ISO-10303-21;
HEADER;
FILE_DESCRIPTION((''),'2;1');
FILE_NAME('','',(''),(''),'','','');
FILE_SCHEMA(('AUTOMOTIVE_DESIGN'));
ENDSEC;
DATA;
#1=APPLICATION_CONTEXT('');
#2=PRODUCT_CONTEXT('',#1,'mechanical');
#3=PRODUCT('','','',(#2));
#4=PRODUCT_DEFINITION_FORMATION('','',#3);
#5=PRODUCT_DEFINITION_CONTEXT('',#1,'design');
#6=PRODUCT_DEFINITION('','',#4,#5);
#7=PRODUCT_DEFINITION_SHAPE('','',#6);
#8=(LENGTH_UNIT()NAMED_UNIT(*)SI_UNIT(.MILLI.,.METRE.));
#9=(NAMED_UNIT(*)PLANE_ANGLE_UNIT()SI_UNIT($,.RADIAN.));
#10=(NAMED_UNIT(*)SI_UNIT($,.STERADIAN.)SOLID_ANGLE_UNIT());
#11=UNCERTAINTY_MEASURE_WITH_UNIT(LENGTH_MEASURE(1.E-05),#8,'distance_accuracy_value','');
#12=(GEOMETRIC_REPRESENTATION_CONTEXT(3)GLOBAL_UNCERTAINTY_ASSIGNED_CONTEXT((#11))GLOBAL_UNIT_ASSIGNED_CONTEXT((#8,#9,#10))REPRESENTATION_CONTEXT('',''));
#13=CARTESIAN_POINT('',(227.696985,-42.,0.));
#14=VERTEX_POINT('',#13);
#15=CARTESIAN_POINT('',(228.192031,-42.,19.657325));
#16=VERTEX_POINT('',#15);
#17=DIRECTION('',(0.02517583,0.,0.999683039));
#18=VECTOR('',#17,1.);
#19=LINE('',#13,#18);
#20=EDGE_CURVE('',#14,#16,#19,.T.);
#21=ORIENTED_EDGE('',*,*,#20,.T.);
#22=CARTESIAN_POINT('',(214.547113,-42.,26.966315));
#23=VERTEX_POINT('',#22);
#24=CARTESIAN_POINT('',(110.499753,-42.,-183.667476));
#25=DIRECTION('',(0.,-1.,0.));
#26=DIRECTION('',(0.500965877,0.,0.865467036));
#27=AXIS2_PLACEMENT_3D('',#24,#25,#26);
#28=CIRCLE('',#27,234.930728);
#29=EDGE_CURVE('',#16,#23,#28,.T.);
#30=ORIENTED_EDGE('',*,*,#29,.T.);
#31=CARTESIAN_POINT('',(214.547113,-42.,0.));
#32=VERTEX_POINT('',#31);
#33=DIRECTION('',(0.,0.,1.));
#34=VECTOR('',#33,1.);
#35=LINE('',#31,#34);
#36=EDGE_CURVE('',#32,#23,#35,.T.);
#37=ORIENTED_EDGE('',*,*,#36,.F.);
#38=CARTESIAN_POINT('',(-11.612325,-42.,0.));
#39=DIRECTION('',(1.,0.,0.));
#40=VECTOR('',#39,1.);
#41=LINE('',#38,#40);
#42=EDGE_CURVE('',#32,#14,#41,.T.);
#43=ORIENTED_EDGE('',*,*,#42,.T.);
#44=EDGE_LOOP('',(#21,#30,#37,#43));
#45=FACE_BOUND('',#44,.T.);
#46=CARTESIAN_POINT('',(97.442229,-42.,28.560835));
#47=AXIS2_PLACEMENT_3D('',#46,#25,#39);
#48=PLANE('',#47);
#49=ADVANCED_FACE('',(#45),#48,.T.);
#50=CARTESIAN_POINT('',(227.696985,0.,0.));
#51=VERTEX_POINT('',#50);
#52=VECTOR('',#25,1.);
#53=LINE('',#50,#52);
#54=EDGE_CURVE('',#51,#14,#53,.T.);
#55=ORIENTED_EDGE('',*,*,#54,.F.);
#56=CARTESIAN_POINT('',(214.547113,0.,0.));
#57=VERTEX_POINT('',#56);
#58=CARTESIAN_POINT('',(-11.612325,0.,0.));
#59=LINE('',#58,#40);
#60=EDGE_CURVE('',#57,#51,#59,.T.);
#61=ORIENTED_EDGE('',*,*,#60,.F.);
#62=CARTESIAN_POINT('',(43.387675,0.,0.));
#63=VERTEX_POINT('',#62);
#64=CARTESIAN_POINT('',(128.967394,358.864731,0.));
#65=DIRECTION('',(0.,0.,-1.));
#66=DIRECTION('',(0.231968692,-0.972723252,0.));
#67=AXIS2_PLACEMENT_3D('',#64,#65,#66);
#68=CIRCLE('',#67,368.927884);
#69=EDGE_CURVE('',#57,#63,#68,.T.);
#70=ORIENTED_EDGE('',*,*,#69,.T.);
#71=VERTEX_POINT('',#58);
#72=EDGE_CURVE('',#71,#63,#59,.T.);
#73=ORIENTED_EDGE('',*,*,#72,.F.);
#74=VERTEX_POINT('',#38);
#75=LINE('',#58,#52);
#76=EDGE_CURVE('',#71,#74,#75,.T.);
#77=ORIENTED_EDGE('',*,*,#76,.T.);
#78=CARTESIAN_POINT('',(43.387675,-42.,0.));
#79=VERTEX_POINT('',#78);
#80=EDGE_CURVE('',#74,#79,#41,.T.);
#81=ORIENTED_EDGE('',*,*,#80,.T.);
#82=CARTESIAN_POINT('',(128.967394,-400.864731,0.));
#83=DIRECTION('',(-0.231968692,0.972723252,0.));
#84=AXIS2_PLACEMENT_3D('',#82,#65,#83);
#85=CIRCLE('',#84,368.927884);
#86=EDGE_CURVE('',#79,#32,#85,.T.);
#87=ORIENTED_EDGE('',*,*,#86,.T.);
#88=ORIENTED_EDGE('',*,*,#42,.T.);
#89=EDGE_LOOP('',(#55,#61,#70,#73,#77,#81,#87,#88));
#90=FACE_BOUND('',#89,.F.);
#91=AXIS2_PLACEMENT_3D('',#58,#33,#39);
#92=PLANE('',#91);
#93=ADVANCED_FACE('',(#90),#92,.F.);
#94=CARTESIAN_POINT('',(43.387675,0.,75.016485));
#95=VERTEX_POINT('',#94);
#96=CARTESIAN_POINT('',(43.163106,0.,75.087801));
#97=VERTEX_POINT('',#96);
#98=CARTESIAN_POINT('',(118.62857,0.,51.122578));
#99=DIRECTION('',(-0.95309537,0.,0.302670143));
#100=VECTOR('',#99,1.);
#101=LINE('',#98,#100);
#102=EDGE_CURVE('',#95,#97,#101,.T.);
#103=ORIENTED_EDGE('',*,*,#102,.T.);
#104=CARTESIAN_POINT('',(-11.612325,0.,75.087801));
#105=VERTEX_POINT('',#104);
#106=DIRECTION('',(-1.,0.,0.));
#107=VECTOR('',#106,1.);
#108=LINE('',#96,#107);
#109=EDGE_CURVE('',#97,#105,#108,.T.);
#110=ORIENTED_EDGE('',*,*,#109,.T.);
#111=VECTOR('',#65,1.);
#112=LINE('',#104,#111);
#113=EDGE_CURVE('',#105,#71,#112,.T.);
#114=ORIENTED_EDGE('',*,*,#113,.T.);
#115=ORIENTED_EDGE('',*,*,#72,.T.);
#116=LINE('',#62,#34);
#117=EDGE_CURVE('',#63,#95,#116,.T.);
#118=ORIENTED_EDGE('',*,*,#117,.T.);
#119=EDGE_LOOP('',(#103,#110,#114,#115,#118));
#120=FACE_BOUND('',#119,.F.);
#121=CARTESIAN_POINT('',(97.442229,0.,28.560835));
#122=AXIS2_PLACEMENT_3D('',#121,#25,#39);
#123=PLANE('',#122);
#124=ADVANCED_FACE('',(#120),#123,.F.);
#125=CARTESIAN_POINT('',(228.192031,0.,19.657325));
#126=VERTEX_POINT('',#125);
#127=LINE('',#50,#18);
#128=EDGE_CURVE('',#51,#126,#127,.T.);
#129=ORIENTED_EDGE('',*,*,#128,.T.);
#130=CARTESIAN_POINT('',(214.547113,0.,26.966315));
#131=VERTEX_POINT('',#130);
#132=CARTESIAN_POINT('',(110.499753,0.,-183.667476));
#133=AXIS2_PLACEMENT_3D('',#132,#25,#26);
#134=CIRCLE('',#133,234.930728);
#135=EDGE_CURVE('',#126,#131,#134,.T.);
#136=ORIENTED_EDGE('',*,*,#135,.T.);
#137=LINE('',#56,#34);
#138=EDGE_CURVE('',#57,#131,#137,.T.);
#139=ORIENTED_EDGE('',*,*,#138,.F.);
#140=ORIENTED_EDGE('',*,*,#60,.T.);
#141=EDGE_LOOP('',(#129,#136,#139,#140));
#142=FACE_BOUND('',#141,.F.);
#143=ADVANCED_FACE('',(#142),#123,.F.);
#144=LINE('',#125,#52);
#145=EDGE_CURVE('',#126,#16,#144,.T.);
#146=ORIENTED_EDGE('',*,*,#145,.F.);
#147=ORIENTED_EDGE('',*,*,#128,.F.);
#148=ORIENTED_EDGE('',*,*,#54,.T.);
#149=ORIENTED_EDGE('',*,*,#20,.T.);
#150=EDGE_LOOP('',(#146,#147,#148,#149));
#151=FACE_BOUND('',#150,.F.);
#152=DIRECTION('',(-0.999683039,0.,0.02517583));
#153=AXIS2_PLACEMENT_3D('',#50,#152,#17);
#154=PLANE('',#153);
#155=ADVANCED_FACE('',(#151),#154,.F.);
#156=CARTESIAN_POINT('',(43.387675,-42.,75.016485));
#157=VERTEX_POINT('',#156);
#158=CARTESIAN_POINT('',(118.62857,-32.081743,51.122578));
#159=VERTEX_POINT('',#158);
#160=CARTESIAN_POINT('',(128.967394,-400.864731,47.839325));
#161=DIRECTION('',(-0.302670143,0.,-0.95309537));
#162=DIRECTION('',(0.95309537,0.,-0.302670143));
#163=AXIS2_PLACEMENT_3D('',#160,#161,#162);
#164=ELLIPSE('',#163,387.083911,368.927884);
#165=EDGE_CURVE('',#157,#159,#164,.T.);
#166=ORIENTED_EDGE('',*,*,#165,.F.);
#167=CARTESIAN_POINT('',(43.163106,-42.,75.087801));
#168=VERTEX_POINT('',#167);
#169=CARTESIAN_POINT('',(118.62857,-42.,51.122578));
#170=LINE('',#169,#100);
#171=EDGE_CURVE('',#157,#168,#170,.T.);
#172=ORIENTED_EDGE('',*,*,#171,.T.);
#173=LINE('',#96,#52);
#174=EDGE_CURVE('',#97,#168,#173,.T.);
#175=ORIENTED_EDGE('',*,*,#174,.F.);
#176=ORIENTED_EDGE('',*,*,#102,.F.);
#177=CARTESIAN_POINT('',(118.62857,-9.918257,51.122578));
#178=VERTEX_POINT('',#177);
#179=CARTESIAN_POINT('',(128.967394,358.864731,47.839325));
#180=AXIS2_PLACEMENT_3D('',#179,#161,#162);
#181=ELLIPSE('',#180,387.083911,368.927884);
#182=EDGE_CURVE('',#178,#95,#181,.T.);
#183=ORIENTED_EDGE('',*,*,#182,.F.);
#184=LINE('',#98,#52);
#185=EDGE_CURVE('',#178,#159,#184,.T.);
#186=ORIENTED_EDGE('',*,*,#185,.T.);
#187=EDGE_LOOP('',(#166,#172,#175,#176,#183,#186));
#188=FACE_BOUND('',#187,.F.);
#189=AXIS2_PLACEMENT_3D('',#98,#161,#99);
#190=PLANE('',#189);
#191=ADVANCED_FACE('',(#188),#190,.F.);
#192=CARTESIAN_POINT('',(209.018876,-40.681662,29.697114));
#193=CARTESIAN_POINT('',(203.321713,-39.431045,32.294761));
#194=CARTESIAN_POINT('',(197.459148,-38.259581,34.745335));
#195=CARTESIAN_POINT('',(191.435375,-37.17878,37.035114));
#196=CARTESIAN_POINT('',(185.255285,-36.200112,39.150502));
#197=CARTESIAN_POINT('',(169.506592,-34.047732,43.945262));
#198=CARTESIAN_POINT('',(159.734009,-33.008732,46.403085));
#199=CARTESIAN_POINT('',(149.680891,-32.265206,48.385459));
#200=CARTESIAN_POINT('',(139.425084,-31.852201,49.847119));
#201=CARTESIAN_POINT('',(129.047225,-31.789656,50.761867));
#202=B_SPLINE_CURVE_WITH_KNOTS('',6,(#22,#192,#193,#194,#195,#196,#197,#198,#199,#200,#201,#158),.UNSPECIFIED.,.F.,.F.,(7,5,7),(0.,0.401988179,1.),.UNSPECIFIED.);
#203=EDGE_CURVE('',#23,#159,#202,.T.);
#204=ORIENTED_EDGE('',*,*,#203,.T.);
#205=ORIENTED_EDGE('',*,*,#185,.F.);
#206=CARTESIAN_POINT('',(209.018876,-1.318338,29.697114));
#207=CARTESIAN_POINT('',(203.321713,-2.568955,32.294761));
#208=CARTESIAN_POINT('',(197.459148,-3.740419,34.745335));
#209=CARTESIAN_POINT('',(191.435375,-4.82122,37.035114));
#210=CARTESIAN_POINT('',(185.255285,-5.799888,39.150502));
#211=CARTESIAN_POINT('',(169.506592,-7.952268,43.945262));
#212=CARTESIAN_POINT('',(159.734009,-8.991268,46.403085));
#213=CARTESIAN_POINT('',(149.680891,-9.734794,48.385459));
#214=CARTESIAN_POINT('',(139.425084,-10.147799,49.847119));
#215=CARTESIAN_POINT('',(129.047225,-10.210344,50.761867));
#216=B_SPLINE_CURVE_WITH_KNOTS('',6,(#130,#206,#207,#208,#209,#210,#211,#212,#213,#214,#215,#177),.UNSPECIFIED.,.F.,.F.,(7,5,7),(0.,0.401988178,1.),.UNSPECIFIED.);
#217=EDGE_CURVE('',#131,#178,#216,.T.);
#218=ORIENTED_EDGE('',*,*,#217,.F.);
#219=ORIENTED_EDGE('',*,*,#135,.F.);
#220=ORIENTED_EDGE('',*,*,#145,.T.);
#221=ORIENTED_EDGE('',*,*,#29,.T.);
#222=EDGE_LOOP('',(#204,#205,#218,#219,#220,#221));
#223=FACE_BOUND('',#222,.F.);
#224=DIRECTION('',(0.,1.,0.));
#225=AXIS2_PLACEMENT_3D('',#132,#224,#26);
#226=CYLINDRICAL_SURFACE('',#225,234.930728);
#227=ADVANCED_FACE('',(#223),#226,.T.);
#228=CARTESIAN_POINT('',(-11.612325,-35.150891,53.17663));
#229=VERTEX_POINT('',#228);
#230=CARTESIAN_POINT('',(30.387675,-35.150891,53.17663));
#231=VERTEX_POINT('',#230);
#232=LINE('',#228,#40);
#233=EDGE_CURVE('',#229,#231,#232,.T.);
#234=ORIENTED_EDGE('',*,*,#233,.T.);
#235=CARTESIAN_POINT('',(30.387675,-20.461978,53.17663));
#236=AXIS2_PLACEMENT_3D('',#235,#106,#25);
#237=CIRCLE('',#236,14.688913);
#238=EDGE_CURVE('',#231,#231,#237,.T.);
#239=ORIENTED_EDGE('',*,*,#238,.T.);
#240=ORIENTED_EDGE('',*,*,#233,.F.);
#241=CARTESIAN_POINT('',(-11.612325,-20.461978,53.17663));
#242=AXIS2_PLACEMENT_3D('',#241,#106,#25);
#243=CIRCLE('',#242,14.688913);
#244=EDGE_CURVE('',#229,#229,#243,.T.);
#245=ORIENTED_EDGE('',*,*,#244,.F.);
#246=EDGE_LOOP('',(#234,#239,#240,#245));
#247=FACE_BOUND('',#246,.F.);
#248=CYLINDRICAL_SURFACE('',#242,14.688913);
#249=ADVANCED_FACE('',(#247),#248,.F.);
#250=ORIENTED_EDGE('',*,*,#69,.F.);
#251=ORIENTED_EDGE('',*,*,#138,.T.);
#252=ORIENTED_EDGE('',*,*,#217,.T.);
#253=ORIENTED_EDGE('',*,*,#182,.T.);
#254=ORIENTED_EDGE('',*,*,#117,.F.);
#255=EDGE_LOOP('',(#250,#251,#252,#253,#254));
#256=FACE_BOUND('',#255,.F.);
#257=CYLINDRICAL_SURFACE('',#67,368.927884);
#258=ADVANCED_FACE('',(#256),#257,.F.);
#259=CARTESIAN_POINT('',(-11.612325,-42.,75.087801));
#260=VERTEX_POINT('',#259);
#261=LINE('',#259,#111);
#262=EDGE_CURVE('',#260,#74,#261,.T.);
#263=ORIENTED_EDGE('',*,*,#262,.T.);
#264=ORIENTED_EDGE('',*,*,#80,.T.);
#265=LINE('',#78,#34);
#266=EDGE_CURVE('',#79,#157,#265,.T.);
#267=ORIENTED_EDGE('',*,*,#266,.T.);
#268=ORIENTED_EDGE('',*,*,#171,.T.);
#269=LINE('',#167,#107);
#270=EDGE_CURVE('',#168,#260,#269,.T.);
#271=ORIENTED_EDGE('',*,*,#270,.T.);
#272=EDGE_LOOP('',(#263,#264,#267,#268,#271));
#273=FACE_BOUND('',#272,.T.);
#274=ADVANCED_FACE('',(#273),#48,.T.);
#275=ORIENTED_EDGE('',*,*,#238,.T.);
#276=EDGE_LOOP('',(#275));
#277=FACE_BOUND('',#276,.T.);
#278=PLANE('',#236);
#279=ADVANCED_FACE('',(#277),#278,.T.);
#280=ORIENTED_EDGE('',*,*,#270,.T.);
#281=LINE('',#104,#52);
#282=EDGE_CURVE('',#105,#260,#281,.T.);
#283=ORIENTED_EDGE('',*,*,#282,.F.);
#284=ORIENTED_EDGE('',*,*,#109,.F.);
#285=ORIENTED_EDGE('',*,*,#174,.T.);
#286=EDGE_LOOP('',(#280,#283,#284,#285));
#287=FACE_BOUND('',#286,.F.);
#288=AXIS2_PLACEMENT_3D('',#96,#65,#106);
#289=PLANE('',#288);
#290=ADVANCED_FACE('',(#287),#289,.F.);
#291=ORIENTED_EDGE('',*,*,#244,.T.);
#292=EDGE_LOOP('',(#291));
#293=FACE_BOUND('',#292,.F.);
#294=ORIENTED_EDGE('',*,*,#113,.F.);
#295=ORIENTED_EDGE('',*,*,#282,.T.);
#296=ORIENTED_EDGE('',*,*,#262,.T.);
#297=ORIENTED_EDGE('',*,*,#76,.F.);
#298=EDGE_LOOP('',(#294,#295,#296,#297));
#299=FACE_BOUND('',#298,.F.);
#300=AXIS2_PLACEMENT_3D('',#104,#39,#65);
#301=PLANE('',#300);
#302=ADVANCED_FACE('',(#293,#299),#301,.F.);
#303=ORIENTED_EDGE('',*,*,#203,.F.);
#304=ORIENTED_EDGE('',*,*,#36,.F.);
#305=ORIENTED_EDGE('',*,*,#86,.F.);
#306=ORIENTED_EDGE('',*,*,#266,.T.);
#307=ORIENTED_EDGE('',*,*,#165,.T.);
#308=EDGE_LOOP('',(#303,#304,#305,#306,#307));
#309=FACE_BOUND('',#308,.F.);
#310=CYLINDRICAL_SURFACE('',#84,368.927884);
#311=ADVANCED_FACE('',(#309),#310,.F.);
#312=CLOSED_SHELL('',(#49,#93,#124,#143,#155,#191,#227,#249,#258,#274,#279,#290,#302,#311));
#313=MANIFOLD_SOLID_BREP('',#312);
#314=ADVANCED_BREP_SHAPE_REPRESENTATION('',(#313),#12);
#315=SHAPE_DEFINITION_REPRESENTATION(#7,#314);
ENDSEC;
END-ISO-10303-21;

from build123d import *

# Parameters (mm, degrees)
F4_DEPTH = 42
F6_DEPTH = 127
F7_DEPTH = 127
F8_R     = 14.6889125436
F9_DEPTH = 42


# Not quite as in the source:
# - a feature of the source that left no trace in its solid (it failed there, or was rolled back) is left out


with BuildPart() as f4:
    # F2 (on Front) → F4 (new body)
    with BuildSketch(Plane.XZ):
        with BuildLine():
            Line((227.6969850063, 0), (228.1920313835, 19.6573249996))
            ThreePointArc((228.1920313835, 19.6573249996), (175.3476715099, 42.1359663093), (118.6285698173, 51.1225779498))
            Line((118.6285698173, 51.1225779498), (43.1631058455, 75.087800622))
            Line((43.1631058455, 75.087800622), (-11.6123249754, 75.087800622))
            Line((-11.6123249754, 75.087800622), (-11.6123249754, 0))
            Line((-11.6123249754, 0), (227.6969850063, 0))
        make_face()
    extrude(amount=F4_DEPTH)

    # F5 (on face) → F6 (cut)
    with BuildSketch(Plane(origin=(0, 0, 0), x_dir=(1, 0, 0), z_dir=(0, 0, -1))):
        with BuildLine():
            ThreePointArc((214.5471125841, 0), (128.9673938043, 10.0631527668), (43.3876750246, 0))
            Line((43.3876750246, 0), (214.5471125841, 0))
        make_face()
    extrude(amount=-F6_DEPTH, mode=Mode.SUBTRACT)

    # F5 (on face) → F7 (cut)
    with BuildSketch(Plane(origin=(0, 0, 0), x_dir=(1, 0, 0), z_dir=(0, 0, -1))):
        with BuildLine():
            Line((214.5471125841, 42), (43.3876750246, 42))
            ThreePointArc((43.3876750246, 42), (128.9673938043, 31.9368472332), (214.5471125841, 42))
        make_face()
    extrude(amount=-F7_DEPTH, mode=Mode.SUBTRACT)

    # F8 (on face) → F9 (cut)
    with BuildSketch(Plane(origin=(-11.6123249754, 0, 0), x_dir=(0, -1, 0), z_dir=(-1, 0, 0))):
        with Locations((20.4619783908, 53.1766302884)):
            Circle(F8_R)
    extrude(amount=-F9_DEPTH, mode=Mode.SUBTRACT)


solid = f4.part
